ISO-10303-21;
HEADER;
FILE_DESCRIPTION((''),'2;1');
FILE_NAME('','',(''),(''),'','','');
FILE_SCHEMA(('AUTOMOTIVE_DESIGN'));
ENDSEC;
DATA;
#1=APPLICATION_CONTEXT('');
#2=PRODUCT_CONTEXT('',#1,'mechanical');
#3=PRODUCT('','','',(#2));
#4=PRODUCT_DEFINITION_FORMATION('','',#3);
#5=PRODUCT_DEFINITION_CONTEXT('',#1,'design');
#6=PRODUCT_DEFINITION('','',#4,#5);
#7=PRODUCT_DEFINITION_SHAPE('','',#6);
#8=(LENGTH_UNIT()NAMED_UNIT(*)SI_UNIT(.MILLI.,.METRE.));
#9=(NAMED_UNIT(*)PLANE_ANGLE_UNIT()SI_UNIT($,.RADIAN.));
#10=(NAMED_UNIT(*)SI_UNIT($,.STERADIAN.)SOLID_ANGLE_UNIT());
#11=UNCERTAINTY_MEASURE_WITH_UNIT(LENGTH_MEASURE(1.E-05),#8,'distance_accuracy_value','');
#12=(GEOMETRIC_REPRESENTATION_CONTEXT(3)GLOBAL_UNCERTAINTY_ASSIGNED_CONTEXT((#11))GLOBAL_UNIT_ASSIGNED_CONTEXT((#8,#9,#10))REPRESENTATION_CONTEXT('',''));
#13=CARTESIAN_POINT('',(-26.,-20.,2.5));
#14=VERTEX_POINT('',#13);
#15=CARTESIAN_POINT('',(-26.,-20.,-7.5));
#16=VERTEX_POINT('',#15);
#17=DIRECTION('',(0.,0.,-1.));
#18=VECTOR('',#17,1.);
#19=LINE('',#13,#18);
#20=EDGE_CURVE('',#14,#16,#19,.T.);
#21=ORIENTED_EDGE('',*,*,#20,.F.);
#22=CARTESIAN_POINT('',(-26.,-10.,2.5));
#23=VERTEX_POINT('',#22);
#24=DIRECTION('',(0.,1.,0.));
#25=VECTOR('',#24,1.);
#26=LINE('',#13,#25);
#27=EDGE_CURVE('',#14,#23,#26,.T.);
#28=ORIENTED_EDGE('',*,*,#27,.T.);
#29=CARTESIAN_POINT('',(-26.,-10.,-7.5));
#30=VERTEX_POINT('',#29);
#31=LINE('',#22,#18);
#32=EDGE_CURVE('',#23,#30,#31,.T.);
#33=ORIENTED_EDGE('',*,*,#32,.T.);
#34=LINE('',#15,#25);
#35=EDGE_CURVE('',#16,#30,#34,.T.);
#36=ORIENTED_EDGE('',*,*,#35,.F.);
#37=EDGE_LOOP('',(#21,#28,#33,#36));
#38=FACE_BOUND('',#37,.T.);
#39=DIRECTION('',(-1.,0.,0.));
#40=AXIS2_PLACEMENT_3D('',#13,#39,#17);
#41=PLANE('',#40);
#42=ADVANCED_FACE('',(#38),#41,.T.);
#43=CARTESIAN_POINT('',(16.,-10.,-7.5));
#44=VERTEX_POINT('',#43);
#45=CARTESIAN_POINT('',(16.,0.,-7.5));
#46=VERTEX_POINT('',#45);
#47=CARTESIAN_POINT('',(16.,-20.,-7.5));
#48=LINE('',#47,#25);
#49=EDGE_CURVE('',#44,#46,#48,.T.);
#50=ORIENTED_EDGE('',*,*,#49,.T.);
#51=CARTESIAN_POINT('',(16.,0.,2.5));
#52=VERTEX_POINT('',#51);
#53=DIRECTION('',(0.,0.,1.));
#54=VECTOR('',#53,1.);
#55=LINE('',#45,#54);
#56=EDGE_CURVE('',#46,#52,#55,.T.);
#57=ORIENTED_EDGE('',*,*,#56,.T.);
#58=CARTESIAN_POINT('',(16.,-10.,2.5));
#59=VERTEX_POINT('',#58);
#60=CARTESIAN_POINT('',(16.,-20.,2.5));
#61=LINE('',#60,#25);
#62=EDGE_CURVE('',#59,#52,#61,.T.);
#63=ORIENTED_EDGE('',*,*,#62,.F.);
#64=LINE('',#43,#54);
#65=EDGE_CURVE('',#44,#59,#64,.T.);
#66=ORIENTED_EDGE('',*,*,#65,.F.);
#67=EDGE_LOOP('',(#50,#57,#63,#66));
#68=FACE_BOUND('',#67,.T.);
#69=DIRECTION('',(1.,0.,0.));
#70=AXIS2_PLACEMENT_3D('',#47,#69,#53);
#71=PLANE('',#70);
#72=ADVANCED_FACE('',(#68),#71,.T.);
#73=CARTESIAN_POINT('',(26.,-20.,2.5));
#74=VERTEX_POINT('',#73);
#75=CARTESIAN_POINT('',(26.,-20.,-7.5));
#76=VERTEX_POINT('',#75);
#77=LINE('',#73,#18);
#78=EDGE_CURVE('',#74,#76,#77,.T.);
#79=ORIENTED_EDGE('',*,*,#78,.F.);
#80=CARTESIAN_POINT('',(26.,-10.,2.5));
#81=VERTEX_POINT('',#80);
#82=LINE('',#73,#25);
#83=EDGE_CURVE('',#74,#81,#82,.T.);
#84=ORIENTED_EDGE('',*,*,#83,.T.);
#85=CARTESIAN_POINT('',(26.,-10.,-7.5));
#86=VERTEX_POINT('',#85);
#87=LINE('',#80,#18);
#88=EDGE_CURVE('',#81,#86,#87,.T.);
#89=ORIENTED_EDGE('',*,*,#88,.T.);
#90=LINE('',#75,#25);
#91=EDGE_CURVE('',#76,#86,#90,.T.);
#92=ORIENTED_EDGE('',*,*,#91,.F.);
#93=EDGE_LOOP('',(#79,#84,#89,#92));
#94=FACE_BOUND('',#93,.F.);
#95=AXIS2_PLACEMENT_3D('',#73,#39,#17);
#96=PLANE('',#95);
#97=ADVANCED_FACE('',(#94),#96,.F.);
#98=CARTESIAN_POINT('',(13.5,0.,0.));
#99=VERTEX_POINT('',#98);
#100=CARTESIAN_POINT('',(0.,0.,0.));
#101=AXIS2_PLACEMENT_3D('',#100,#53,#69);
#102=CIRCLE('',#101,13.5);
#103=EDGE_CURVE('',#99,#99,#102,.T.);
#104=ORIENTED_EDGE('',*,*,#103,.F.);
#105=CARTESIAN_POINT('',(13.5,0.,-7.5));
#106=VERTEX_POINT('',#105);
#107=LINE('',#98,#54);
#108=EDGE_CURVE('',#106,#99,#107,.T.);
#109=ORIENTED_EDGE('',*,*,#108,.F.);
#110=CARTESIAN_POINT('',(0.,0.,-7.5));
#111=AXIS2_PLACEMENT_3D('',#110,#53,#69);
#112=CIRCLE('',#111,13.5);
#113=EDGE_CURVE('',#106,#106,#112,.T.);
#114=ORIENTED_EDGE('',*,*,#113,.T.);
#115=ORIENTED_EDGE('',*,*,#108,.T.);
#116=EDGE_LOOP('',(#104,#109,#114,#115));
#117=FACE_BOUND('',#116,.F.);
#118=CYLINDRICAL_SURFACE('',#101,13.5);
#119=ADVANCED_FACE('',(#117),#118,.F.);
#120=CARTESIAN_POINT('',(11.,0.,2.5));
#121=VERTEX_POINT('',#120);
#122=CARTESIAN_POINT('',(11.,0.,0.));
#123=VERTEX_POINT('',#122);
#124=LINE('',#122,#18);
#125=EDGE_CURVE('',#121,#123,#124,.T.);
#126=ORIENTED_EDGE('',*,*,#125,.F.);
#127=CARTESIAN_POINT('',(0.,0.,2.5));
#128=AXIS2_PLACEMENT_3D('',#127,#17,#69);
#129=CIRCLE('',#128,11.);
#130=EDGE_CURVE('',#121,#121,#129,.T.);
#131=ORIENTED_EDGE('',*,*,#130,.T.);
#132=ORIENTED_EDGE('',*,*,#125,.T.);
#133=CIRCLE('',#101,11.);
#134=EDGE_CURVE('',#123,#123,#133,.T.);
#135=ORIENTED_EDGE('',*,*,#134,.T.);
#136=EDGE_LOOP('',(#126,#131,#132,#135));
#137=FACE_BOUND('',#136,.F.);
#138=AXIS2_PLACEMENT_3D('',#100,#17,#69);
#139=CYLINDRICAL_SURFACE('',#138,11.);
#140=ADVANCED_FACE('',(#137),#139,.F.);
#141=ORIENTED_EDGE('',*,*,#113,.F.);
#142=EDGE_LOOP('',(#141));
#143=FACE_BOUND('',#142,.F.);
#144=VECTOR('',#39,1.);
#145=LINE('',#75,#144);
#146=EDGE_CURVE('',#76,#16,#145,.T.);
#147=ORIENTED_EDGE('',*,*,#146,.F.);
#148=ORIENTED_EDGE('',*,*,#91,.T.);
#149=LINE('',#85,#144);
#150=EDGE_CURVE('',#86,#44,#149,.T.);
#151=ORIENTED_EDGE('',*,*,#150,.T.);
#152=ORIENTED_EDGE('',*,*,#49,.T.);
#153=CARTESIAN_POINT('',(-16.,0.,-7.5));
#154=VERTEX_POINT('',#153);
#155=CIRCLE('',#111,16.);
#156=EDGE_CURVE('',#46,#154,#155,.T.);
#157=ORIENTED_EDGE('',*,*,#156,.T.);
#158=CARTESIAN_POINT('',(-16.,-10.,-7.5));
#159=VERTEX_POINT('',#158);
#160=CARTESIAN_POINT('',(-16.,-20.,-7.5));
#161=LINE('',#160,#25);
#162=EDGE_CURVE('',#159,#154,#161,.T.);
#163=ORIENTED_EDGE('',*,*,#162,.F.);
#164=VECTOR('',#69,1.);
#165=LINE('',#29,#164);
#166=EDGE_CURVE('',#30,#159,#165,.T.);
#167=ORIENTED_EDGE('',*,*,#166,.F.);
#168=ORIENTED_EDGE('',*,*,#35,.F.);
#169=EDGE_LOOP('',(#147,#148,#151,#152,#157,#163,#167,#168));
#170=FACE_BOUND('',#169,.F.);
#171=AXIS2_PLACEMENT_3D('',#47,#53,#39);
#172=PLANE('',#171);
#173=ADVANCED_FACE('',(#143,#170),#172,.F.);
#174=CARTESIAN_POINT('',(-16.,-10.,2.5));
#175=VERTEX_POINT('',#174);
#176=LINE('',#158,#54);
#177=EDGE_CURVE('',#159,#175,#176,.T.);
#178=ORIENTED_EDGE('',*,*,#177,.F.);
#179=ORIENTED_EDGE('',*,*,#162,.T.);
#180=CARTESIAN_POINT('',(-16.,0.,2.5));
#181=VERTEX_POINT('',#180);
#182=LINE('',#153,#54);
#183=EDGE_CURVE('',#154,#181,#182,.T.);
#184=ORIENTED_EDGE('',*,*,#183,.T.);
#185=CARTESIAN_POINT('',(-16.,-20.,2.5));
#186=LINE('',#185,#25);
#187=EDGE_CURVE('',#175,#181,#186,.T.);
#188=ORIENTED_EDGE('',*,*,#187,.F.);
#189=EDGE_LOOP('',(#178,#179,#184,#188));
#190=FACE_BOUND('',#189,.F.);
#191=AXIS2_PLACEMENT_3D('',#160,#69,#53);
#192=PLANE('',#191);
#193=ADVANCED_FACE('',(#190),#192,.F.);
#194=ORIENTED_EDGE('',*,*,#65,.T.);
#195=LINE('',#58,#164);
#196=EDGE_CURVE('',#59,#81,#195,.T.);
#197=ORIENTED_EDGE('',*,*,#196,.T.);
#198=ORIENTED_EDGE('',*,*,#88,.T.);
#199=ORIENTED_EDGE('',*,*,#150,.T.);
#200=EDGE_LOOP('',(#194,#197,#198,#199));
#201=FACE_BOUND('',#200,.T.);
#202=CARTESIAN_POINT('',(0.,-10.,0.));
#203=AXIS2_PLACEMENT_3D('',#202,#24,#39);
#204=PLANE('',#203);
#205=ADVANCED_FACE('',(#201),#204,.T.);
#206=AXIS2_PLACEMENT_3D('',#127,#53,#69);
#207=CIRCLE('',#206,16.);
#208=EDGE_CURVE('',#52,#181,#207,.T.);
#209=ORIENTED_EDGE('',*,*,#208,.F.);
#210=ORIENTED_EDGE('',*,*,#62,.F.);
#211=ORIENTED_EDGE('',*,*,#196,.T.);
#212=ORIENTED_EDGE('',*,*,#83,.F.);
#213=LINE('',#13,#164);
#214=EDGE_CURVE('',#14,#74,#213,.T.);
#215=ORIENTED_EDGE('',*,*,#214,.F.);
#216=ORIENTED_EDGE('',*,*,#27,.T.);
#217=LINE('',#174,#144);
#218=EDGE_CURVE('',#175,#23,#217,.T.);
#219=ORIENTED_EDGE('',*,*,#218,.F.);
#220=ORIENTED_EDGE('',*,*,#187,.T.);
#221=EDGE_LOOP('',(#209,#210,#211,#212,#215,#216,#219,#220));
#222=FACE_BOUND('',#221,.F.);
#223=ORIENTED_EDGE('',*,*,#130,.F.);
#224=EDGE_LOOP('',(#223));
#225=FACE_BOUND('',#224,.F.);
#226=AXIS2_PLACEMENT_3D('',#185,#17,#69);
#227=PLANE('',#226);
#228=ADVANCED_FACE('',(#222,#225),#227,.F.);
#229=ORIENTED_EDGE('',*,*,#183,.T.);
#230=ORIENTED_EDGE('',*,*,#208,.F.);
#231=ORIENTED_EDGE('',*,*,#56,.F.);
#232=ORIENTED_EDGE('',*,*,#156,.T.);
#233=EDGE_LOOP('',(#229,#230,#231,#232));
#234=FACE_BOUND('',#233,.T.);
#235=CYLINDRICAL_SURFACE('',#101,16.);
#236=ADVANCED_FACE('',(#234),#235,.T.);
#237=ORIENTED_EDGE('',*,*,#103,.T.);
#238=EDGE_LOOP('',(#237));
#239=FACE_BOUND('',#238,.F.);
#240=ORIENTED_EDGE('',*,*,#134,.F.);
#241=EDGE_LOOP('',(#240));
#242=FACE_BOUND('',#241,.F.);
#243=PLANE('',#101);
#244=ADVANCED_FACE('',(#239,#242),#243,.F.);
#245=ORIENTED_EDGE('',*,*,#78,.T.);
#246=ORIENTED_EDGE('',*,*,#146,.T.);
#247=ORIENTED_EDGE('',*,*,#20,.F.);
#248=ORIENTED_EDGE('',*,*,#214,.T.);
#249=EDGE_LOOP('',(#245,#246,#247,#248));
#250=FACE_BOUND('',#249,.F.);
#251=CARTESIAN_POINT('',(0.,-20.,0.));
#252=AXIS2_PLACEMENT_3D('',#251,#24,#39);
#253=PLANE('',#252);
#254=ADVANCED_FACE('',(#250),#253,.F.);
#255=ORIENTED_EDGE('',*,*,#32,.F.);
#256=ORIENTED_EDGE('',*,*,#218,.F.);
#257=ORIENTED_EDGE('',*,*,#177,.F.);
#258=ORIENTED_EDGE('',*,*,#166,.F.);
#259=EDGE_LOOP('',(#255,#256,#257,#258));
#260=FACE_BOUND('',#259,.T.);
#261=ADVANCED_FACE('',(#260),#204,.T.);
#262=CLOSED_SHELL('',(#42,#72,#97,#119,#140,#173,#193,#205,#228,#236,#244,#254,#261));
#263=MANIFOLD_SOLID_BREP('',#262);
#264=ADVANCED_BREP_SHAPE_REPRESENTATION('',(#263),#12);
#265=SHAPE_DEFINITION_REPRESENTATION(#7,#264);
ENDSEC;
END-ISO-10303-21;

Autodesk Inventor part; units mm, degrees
ref_plane "YZ Plane" through (0, 0, 0) normal (1, 0, 0) x (0, 1, 0)
ref_plane "XY Plane" through (0, 0, 0) normal (0, 0, 1) x (1, 0, 0)
sketch "Sketch1" plane through (0, 0, 0) normal (0, 0, 1) x (1, 0, 0)
  circle A0 centre (0, 0) radius 13.5
  circle A1 centre (0, 0) radius 16
  circle A2 centre (0, 0) radius 11
  dimension "d0" = 27
  dimension "d1" = 32
  dimension "d2" = 22
extrude "Extrusion1" add sketch "Sketch1" along normal blind 2.5 contours A0 | A1
extrude "Extrusion2" add sketch "Sketch1" against normal blind 7.5 contours A1
ref_plane "Work Plane1" through (0, -20, 0) normal (0, 1, 0) x (-1, 0, 0)
sketch "Sketch2" plane through (0, -20, 0) normal (0, 1, 0) x (-1, 0, 0)
  line L0 (-16, -7.5) -> (16, -7.5) projected
  line L1 (16, 2.5) -> (-16, 2.5) projected
  line L2 (16, -7.5) -> (16, 2.5) projected
  line L3 (-16, -7.5) -> (-16, 2.5) projected
  line L4 (-16, 2.5) -> (-26, 2.5)
  line L5 (-26, 2.5) -> (-26, -7.5)
  line L6 (-26, -7.5) -> (-16, -7.5)
  line L7 (-16, -7.5) -> (-16, 2.5)
  line L8 (16, 2.5) -> (26, 2.5)
  line L9 (26, 2.5) -> (26, -7.5)
  line L10 (26, -7.5) -> (16, -7.5)
  line L11 (16, -7.5) -> (16, 2.5)
  point P0 (0, 0)
  dimension "d8" = 10
  dimension "d9" = 10
  dimension "d10" = 10
  dimension "d11" = 10
extrude "Extrusion3" add sketch "Sketch2" along normal blind 20 contours L3 L1 L2 L0
delete faces "Delete Face1" heal yes whole lump no faces at (3.6667, 0, -5)
extrude "Extrusion4" add sketch "Sketch2" along normal blind 10 contours L6 L5 L4 L3 | L2 L8 L9 L10
properties part number "Adafruit_1528_4699_ND_House_02"
